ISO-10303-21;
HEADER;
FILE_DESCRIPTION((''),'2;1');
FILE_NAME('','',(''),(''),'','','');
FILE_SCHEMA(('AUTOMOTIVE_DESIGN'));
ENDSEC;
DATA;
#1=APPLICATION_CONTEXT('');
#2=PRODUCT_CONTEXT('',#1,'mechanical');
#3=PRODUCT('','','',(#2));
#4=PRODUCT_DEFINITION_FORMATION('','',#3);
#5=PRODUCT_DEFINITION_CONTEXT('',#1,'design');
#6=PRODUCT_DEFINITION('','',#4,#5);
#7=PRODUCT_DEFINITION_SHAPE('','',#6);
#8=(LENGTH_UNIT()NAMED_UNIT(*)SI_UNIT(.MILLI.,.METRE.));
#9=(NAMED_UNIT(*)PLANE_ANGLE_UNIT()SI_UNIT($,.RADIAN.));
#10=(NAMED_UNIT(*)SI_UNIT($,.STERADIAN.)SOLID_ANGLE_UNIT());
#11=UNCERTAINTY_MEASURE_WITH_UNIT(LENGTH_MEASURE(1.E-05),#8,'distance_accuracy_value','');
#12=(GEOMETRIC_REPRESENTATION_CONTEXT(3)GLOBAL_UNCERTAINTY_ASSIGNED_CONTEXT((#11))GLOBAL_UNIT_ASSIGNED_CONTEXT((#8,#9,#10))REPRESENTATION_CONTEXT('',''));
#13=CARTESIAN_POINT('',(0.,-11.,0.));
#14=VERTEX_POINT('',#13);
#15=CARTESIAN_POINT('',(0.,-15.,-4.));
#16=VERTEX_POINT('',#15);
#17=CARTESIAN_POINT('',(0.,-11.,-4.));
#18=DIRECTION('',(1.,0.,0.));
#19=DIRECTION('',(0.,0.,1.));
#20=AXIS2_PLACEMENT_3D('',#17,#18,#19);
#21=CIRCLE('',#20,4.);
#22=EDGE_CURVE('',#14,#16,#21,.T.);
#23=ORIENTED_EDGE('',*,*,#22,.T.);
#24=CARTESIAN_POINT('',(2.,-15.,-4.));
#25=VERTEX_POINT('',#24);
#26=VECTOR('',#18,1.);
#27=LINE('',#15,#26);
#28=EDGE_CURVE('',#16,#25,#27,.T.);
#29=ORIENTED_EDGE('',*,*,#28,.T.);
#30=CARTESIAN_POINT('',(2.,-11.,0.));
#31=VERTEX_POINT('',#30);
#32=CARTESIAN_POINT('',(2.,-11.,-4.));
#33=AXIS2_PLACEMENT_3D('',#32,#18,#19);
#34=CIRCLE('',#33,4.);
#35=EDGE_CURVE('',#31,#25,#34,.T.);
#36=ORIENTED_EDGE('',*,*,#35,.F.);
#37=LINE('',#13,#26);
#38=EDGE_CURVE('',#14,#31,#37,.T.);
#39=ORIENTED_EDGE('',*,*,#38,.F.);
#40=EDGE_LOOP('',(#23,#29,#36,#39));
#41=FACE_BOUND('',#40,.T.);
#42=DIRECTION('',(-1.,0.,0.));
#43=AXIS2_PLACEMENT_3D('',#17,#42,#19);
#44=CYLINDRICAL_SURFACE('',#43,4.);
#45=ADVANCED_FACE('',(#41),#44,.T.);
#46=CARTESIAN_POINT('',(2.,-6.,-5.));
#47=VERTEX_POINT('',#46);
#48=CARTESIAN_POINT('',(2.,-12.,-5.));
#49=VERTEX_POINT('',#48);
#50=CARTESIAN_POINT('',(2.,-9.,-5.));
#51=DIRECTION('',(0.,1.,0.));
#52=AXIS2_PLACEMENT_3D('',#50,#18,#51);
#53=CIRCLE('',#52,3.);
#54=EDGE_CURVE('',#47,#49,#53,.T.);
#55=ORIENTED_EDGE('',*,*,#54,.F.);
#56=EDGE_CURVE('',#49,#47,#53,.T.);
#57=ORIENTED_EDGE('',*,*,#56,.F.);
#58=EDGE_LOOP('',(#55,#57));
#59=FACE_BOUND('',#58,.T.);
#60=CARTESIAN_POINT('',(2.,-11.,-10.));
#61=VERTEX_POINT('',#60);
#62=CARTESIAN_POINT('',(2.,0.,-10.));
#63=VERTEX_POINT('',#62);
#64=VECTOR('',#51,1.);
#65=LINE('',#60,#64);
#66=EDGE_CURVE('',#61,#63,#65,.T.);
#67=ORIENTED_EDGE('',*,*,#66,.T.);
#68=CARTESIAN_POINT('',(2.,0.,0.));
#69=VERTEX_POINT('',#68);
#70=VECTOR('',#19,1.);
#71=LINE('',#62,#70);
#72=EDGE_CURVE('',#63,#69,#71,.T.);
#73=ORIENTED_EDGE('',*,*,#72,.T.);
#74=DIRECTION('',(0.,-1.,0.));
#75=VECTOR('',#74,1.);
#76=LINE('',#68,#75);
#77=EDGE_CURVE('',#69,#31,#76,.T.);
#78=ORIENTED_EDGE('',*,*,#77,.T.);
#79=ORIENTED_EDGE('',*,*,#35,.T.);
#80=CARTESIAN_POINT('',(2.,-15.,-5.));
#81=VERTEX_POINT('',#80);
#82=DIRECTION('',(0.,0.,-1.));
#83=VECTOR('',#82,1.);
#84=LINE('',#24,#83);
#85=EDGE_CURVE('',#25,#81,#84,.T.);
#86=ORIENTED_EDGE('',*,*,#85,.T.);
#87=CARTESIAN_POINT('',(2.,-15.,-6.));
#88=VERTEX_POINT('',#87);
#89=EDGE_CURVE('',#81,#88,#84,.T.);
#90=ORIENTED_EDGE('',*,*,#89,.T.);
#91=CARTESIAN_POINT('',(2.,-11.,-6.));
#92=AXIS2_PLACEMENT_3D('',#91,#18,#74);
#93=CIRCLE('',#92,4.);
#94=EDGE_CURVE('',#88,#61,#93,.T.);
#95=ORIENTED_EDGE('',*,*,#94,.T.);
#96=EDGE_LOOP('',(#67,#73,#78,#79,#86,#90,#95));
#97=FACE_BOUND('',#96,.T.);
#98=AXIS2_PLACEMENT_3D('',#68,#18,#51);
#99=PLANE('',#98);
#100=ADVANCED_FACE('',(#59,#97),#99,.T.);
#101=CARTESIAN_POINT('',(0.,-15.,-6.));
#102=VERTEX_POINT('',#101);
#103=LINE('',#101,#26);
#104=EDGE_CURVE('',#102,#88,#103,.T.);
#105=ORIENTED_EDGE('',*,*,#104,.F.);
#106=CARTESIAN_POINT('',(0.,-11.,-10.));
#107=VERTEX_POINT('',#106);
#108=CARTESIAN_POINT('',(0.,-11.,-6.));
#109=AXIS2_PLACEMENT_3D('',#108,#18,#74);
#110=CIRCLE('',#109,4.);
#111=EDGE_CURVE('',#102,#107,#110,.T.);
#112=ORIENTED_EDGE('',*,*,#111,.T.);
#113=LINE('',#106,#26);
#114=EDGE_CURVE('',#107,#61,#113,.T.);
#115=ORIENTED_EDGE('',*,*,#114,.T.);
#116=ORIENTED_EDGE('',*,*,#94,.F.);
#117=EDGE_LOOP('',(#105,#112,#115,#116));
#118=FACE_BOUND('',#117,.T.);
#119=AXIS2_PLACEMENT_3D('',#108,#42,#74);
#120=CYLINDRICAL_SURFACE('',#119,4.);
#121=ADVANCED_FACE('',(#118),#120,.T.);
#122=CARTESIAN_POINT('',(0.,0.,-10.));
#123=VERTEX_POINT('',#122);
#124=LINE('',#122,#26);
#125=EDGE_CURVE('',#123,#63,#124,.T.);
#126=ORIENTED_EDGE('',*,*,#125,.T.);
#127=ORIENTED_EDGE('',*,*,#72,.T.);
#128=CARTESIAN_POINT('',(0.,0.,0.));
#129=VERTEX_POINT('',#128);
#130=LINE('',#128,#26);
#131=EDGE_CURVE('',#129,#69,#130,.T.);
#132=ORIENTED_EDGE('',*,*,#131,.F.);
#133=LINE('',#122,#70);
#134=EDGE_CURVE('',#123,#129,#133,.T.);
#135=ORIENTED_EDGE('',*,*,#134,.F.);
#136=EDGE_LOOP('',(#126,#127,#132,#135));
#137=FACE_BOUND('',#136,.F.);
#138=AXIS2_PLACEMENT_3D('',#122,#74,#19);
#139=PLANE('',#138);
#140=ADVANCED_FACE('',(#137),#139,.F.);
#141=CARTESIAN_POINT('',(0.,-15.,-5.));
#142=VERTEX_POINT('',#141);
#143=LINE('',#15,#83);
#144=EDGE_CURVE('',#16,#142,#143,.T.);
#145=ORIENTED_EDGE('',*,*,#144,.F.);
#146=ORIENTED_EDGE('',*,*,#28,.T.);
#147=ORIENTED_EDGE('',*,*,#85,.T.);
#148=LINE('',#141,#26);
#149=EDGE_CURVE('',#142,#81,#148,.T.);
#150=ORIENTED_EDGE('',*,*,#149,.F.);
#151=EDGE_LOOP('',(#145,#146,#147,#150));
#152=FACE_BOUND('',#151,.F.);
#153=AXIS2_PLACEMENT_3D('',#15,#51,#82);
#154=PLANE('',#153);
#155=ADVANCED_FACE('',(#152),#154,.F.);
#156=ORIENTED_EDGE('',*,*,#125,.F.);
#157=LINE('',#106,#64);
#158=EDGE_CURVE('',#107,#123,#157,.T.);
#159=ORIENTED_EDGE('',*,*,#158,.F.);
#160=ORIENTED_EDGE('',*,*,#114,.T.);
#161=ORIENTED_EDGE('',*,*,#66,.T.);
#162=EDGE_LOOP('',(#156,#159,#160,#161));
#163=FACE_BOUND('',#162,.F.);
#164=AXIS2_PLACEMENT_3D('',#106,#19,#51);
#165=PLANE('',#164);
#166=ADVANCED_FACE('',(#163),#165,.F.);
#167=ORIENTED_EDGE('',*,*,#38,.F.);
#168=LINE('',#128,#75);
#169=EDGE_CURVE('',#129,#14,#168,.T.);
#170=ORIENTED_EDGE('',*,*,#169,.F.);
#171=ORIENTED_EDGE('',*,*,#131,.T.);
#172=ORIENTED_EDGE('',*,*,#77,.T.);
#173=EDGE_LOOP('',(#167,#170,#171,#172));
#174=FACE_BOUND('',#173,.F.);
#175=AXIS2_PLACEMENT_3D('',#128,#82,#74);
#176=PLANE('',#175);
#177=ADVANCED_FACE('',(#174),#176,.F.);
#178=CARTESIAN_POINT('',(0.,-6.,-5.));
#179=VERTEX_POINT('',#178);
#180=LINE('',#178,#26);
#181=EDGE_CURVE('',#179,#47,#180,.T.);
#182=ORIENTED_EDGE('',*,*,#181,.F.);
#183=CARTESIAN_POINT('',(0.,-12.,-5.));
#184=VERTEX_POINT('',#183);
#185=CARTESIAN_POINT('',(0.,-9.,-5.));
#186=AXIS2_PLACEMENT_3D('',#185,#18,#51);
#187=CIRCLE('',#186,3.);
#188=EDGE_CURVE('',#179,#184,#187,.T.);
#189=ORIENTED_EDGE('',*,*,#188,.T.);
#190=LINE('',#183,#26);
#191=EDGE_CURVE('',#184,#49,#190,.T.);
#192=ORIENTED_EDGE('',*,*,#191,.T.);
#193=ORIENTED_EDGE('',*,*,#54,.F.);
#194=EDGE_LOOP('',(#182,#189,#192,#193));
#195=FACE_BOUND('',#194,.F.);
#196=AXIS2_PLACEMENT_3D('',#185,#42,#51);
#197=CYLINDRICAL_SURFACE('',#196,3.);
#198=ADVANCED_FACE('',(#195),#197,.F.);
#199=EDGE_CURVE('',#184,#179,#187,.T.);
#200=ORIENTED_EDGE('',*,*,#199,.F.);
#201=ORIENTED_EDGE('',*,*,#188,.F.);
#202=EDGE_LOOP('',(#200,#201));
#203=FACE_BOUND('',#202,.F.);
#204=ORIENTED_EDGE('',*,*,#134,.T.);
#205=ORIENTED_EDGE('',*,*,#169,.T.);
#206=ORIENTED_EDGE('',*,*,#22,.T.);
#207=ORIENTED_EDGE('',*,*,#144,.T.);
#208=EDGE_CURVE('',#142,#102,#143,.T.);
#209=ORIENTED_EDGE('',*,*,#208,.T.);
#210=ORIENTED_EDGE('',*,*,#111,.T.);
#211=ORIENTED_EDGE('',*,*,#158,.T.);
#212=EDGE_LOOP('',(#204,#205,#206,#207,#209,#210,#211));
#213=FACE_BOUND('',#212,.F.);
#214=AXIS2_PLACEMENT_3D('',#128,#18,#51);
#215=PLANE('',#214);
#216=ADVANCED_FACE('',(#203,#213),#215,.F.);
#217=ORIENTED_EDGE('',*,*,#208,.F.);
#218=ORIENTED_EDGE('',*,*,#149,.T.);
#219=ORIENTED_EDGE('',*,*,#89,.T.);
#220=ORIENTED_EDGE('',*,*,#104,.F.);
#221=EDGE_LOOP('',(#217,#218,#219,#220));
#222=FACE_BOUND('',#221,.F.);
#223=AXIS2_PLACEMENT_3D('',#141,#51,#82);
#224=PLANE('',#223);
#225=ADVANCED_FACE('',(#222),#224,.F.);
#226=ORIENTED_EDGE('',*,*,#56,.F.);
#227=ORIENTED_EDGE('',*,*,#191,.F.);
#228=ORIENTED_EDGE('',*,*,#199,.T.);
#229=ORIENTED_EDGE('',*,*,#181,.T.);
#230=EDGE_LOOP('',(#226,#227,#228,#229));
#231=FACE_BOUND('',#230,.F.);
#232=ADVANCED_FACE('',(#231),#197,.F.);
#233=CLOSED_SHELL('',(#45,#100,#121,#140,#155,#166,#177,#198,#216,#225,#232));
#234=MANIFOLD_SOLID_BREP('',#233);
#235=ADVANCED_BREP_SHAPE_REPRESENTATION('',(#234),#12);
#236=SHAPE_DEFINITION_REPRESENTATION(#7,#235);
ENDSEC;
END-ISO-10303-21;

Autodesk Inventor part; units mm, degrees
ref_plane "YZ Plane" through (0, 0, 0) normal (1, 0, 0) x (0, 1, 0)
ref_plane "XZ Plane" through (0, 0, 0) normal (0, 1, 0) x (-1, 0, 0)
ref_plane "XY Plane" through (0, 0, 0) normal (0, 0, 1) x (1, 0, 0)
sketch "Esboço1" plane through (0, 0, 0) normal (1, 0, 0) x (0, 1, 0)
  line L0 (0, 0) -> (-11, 0)
  line L1 (-15, -4) -> (-15, -6)
  line L2 (-11, -10) -> (0, -10)
  line L3 (0, -10) -> (0, 0)
  arc A0 (-11, 0) -> (-15, -4) centre (-11, -4) ccw
  arc A1 (-15, -6) -> (-11, -10) centre (-11, -6) ccw
  line L4 (-15, -5) -> (-9, -5)
  circle A2 centre (-9, -5) radius 3
  point P0 (-15, -10)
  point P1 (-15, 0)
  dimension "d0" = 15
  dimension "d1" = 10
  dimension "d2" = 4
  dimension "d3" = 6
  dimension "d4" = 6
extrude "Extrusão1" add sketch "Esboço1" along normal blind 2
sketch "Esboço2" plane through (2, 0, 0) normal (1, 0, 0) x (0, 0, -1)
  circle A0 centre (5, -9) radius 3 projected
properties part number "Chapa da Luz de Freio"
